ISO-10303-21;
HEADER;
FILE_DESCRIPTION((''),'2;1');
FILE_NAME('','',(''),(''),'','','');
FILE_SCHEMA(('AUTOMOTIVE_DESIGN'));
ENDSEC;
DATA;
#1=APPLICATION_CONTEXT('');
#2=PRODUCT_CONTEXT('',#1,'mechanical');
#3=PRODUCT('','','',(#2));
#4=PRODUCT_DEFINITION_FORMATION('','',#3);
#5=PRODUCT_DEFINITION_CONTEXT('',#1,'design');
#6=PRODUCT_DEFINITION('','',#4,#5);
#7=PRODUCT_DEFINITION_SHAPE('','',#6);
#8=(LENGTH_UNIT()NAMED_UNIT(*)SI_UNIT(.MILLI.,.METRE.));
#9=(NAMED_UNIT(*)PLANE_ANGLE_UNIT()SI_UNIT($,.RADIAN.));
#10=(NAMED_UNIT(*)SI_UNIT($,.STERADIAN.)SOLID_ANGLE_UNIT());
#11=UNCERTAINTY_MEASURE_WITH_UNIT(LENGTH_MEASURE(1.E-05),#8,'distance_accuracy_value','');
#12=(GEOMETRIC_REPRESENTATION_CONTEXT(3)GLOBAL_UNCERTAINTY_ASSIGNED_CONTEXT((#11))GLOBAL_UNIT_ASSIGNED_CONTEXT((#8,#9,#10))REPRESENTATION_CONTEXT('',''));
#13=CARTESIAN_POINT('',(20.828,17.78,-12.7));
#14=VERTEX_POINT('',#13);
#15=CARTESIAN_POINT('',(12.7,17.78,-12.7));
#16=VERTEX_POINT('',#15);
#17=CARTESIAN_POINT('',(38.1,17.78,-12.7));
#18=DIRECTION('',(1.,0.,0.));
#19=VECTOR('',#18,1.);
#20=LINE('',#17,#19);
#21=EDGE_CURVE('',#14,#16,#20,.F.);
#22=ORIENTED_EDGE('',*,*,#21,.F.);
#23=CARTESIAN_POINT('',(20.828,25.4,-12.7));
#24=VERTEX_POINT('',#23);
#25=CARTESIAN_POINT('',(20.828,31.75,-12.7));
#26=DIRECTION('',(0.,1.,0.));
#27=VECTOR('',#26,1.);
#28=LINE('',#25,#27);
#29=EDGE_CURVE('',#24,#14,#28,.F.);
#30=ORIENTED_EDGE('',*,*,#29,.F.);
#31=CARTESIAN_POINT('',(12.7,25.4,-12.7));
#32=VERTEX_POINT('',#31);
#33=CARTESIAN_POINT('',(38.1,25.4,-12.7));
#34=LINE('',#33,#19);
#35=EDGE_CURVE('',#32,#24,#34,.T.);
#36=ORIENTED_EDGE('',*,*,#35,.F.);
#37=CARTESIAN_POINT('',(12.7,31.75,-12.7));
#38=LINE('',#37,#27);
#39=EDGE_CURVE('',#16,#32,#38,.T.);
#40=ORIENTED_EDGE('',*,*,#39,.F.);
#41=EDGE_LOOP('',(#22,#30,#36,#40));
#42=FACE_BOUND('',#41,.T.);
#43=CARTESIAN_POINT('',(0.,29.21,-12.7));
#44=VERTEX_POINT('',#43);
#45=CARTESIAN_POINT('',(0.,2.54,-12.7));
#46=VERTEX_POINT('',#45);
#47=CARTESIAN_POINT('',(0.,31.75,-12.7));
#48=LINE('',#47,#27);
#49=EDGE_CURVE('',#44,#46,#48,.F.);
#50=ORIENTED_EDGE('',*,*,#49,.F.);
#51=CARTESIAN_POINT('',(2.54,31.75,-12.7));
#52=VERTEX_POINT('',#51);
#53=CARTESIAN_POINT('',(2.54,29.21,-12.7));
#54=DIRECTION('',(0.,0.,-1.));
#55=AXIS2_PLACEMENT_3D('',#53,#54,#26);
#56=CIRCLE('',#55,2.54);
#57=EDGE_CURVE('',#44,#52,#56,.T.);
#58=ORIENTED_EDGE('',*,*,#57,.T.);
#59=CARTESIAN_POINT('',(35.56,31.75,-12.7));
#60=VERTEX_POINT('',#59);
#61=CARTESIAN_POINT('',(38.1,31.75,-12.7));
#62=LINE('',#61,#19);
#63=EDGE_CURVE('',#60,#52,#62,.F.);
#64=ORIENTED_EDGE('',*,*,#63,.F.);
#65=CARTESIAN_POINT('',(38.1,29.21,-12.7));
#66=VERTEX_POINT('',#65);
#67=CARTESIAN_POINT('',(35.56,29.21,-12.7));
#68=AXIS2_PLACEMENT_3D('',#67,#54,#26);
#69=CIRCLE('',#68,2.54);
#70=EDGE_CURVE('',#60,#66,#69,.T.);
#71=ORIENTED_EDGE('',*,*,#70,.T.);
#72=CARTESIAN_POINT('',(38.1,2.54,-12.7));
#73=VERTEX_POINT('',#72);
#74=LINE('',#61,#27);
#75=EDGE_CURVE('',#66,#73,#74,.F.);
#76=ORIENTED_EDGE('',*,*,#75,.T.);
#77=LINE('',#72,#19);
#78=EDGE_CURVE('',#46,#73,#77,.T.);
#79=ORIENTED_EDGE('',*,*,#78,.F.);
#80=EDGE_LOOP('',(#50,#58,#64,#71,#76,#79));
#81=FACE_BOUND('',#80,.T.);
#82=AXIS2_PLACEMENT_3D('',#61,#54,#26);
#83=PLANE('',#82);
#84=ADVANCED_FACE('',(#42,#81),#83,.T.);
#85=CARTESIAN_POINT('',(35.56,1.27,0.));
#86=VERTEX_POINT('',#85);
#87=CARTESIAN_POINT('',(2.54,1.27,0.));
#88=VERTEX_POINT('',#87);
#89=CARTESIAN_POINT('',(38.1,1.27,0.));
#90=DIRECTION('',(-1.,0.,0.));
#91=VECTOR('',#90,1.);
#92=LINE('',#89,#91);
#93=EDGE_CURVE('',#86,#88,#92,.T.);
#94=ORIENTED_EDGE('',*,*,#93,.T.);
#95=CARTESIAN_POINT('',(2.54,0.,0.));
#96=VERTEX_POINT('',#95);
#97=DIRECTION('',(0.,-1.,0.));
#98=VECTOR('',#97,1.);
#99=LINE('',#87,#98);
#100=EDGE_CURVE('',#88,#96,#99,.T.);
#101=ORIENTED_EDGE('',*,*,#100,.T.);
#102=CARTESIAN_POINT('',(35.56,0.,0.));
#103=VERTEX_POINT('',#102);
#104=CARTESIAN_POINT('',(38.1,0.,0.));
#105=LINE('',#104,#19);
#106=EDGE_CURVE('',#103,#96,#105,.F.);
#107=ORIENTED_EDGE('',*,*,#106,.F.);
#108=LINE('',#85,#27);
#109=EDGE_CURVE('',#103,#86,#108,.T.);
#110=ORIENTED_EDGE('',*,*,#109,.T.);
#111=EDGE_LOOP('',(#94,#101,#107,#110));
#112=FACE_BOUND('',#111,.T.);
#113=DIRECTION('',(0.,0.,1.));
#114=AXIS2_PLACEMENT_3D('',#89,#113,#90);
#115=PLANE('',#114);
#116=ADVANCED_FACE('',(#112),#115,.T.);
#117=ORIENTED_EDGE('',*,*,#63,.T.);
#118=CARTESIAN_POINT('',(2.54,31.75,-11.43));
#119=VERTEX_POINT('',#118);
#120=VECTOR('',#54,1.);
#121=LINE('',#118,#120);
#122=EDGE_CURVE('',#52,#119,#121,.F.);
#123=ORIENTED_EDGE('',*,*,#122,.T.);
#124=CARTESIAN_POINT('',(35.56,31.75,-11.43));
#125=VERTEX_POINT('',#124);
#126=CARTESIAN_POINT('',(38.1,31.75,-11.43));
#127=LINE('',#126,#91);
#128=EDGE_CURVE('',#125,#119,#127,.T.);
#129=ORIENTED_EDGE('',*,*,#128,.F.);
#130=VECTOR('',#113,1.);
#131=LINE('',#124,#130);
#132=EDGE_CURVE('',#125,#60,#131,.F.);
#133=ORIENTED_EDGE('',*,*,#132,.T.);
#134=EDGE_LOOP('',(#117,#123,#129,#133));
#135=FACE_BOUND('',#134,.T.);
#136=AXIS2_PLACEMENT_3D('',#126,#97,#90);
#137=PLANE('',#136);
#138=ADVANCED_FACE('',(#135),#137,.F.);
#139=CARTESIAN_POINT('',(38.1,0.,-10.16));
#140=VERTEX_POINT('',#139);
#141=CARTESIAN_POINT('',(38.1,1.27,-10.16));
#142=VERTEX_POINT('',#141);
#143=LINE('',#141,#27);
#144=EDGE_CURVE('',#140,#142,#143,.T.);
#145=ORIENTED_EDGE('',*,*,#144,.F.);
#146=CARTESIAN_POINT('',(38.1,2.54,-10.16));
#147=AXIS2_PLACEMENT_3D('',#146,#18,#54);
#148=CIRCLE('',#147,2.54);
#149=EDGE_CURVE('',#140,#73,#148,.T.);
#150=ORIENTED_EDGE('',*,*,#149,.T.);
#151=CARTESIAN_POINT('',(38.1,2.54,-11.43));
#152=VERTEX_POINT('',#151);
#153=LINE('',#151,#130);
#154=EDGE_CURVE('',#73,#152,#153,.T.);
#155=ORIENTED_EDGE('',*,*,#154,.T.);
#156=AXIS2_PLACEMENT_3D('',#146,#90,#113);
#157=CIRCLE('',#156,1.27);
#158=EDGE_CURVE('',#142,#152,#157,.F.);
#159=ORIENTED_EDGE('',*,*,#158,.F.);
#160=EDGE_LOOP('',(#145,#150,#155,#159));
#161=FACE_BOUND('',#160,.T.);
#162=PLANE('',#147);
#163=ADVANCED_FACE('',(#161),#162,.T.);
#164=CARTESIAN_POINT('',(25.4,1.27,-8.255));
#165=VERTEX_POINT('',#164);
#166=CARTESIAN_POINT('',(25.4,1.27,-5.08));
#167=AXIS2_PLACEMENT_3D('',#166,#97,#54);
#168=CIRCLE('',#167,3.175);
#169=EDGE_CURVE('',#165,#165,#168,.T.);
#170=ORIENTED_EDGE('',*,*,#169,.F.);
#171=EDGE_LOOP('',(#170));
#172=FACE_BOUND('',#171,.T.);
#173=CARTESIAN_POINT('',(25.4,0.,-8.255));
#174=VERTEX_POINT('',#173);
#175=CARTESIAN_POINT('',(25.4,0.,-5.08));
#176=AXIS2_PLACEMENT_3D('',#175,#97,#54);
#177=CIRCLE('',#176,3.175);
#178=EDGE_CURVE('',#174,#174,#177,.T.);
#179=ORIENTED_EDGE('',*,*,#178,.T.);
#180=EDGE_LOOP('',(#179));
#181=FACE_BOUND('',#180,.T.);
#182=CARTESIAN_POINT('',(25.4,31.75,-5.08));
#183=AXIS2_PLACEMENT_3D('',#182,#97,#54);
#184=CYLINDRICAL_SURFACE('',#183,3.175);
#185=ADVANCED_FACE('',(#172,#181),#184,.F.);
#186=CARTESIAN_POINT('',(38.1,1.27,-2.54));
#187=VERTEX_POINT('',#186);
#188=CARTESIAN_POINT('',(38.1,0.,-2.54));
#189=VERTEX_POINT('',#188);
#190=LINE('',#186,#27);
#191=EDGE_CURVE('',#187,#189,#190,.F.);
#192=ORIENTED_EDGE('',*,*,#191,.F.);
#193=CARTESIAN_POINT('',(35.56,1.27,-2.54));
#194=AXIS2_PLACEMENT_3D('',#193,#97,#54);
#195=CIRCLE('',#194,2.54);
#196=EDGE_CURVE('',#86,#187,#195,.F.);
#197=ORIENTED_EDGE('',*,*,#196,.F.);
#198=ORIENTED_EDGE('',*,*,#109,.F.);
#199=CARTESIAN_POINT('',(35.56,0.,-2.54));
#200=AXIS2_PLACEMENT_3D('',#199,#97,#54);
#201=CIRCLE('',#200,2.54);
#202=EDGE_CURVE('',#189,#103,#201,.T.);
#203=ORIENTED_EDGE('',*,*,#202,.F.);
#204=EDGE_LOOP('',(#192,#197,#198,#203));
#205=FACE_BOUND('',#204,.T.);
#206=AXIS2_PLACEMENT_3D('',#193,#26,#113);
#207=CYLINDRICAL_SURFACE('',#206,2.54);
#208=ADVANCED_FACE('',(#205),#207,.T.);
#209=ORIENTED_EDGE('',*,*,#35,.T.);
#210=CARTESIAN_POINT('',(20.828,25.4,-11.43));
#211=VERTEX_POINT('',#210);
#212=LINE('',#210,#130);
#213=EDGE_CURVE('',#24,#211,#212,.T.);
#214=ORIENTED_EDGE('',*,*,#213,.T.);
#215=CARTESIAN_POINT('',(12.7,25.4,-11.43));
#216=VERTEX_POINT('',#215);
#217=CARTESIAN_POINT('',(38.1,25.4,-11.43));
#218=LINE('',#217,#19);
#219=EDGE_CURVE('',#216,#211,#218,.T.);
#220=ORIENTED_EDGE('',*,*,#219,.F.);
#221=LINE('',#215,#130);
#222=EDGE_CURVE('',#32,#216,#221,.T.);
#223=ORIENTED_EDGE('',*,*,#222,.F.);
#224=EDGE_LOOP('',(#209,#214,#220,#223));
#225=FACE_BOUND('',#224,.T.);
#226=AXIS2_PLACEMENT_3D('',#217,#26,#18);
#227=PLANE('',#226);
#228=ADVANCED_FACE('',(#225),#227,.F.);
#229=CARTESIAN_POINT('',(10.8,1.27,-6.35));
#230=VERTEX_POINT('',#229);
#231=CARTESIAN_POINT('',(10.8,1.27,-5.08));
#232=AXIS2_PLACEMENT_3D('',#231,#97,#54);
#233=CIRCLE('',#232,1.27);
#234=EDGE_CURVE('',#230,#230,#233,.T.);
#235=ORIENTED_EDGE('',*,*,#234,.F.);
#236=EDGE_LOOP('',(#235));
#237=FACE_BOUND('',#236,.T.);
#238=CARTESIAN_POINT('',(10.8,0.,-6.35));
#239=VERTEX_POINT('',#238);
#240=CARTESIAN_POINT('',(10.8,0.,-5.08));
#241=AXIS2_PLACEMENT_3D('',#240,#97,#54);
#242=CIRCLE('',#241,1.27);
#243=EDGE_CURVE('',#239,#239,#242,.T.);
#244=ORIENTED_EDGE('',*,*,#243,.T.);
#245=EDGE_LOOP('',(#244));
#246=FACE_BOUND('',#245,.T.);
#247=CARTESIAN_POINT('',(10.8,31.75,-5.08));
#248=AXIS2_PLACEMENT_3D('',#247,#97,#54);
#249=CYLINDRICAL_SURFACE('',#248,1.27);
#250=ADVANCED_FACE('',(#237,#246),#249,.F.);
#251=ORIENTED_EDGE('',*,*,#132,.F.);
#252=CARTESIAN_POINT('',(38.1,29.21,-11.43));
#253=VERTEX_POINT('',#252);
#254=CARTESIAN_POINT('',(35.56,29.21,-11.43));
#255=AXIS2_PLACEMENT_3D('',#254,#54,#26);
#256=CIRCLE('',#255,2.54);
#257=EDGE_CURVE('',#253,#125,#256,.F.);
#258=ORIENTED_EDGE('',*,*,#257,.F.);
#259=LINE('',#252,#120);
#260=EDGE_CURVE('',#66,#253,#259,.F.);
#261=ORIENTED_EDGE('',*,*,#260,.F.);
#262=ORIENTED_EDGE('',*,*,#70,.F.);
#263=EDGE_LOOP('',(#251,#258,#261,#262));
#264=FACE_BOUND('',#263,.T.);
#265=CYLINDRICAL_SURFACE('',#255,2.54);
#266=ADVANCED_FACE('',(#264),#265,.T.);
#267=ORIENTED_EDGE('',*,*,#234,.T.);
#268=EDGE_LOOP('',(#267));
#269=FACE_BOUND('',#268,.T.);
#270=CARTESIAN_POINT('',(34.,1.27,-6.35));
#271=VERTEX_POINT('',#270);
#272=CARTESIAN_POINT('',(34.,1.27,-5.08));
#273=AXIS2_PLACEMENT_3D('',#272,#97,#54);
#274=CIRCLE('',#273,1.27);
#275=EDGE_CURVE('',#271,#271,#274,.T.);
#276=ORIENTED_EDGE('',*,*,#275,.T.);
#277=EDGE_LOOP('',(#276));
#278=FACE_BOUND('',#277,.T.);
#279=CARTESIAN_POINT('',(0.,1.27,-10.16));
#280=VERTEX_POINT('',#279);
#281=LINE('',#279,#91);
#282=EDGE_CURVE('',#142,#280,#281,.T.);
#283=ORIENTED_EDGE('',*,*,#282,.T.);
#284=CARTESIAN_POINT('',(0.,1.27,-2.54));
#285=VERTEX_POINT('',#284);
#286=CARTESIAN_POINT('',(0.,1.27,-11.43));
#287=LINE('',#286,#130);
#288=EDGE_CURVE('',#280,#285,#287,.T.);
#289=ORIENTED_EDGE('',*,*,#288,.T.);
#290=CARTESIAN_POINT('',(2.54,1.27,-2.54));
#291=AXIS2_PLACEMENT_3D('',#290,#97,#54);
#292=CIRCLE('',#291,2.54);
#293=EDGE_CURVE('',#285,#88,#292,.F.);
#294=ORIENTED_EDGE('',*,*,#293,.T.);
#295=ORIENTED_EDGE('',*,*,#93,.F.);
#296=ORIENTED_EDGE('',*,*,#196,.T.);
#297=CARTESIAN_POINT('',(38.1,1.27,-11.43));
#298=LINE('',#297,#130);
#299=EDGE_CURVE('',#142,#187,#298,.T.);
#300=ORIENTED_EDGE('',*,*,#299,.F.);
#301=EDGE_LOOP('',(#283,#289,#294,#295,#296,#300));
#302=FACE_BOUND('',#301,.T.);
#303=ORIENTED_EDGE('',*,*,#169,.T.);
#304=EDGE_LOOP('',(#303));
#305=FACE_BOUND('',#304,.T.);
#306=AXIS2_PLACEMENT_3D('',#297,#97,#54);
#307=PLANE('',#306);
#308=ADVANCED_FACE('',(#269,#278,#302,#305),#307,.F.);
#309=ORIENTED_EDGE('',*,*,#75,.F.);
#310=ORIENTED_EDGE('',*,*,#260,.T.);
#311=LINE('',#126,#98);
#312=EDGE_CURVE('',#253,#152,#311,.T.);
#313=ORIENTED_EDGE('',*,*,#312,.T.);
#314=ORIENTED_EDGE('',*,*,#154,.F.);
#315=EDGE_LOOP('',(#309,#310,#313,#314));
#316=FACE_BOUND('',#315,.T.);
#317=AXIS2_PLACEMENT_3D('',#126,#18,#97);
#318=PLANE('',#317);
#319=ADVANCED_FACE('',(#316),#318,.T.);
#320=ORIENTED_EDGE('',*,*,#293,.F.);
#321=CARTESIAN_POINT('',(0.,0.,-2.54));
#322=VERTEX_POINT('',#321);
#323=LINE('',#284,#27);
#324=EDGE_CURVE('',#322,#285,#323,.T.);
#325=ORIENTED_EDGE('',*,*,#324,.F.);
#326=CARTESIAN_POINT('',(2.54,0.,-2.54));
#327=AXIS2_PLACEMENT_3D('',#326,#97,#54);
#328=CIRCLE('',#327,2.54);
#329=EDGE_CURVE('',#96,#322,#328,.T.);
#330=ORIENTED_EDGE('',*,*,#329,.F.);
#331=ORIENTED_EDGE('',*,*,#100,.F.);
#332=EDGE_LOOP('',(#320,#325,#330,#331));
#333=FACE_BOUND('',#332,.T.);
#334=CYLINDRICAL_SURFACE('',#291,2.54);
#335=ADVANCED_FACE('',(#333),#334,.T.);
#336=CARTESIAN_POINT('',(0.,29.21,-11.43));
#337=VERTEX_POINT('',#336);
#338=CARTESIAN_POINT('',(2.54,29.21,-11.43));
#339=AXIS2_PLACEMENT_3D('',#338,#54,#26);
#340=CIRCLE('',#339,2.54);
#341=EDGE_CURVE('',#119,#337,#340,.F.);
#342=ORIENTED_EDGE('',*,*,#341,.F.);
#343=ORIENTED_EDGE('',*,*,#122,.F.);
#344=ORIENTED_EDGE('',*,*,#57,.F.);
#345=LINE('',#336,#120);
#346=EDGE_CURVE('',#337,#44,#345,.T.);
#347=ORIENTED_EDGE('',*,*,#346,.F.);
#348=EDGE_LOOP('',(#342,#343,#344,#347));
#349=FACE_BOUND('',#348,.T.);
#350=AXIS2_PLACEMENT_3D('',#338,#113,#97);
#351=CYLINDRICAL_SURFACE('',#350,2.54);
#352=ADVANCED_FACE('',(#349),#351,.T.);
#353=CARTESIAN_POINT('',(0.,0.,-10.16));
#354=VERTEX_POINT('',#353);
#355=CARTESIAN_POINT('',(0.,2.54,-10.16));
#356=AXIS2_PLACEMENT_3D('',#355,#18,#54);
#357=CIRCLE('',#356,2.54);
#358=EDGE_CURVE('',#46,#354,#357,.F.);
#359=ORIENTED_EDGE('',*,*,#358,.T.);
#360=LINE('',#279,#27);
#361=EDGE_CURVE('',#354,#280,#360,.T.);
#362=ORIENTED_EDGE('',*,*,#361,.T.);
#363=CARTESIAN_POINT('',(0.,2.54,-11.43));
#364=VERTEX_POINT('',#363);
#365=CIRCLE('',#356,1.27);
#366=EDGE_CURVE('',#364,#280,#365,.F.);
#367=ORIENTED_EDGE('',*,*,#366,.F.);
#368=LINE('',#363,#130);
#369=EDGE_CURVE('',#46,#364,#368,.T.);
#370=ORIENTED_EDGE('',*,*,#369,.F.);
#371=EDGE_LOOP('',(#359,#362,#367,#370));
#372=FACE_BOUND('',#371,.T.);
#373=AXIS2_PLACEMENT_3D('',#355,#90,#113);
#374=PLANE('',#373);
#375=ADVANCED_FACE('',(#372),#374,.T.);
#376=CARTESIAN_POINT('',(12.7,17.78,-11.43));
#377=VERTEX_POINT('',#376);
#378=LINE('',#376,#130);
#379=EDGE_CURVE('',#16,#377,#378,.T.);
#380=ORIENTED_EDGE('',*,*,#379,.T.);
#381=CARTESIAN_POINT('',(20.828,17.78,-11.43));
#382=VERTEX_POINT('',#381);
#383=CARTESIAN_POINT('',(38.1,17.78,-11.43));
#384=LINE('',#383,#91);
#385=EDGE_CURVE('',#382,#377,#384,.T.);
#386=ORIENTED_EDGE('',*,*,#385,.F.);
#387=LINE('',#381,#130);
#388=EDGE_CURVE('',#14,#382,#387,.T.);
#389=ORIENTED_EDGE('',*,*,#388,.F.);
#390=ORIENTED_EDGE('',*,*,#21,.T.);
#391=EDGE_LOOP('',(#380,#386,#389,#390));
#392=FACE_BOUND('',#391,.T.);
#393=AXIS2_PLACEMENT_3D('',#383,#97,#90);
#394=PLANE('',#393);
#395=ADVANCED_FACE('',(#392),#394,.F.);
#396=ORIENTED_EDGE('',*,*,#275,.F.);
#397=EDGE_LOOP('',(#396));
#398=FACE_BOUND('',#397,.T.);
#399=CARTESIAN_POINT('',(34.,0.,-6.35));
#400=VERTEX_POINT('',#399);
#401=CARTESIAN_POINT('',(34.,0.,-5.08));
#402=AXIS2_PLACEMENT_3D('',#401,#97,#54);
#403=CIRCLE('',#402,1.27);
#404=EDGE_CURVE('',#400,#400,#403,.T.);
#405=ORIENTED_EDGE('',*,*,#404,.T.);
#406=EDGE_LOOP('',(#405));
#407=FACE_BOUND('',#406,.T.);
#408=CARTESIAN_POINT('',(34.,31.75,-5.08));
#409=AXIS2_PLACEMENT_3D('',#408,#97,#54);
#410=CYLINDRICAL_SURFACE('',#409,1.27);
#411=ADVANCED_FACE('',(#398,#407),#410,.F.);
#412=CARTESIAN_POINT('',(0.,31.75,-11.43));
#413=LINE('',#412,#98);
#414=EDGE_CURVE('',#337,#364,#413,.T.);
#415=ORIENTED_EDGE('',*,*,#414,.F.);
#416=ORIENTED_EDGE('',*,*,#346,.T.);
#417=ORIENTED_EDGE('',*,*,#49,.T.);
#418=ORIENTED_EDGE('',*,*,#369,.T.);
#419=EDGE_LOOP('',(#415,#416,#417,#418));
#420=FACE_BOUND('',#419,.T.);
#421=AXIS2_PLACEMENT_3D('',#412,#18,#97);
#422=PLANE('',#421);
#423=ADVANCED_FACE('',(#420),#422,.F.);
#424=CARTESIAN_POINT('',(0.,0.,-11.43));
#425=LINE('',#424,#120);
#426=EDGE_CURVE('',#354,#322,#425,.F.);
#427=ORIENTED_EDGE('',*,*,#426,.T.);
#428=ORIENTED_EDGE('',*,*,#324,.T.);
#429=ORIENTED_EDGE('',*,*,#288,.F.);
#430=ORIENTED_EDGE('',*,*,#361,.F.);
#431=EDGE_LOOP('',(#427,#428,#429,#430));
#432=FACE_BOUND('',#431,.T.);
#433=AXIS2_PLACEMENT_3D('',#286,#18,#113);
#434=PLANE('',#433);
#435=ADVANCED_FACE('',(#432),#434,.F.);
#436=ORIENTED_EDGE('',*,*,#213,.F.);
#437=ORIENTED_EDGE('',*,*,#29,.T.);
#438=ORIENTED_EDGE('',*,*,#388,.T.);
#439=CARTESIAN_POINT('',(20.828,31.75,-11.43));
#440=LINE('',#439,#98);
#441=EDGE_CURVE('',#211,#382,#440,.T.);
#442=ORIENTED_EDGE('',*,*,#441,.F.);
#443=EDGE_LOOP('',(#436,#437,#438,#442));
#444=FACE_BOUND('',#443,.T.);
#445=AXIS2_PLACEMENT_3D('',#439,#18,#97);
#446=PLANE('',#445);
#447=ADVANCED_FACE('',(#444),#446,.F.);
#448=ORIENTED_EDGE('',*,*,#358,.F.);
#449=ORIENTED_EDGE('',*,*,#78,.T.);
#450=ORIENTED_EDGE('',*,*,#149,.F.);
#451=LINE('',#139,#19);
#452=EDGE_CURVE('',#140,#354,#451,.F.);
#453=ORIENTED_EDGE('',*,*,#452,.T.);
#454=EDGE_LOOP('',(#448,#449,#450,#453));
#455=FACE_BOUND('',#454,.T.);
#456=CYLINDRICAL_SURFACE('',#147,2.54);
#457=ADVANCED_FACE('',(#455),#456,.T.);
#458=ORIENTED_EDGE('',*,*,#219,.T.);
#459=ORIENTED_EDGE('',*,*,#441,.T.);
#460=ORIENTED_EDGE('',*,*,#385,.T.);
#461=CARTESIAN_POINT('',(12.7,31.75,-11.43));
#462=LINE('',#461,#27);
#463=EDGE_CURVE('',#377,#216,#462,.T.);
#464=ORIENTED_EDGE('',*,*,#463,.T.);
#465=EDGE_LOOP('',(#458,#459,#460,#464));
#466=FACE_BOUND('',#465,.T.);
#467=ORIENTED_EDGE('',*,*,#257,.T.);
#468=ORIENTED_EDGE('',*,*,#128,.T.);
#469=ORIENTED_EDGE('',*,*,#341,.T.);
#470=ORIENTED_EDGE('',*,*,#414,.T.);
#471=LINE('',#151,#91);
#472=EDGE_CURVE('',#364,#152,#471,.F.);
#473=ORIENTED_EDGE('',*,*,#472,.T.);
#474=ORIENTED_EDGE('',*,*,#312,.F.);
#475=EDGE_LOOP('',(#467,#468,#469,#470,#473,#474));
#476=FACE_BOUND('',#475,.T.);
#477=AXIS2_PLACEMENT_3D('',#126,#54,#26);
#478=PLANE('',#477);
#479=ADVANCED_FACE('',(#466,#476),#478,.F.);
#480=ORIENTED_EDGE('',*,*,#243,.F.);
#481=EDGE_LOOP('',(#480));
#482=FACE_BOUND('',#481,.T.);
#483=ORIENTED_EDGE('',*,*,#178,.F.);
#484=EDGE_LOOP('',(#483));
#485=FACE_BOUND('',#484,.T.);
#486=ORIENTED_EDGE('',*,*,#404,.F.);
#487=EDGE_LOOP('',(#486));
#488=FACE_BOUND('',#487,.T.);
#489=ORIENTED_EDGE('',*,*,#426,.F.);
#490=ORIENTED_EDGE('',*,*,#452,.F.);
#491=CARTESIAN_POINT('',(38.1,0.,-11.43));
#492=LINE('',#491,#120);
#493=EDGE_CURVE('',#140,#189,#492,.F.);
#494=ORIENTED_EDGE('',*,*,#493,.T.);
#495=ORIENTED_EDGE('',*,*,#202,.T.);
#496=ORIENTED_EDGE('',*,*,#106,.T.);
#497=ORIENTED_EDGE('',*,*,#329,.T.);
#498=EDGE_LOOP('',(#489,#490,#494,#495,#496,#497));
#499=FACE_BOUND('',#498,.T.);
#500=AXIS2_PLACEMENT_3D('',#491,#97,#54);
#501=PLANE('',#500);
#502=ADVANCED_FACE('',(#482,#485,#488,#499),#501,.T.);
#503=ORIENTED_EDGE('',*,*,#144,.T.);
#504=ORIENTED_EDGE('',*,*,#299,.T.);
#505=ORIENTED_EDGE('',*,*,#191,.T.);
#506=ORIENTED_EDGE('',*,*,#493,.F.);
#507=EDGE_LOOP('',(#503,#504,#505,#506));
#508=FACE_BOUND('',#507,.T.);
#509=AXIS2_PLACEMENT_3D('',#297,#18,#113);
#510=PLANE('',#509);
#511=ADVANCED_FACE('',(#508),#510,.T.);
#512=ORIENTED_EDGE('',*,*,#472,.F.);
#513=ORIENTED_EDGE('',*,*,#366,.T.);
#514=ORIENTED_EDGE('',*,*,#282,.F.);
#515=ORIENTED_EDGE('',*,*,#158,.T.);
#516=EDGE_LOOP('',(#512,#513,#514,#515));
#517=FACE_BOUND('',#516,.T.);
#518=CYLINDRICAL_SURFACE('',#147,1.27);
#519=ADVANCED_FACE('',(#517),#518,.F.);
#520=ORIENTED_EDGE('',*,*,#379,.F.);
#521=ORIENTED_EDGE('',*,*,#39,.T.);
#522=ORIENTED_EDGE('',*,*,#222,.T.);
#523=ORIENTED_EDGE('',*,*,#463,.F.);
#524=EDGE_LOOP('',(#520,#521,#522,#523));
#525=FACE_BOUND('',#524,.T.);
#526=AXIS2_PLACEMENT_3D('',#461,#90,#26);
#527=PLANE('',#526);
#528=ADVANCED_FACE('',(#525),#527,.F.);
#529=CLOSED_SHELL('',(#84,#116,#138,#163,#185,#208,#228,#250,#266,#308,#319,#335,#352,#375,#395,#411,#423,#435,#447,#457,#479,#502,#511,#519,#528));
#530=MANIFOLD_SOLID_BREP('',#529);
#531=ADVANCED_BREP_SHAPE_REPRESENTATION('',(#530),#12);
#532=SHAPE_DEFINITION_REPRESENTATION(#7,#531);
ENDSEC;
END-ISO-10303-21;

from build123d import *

# Parameters (mm, degrees)
BOSS_EXTRUDE1_DEPTH    = 38.1
SKETCH2_W              = 8.128
SKETCH2_H              = 7.62
CUT_EXTRUDE1_DEPTH     = 52.195336702
CONVERT_SOLID1_DEPTH   = 38.1
CONVERT_SOLID1_2_DEPTH = 38.1
FILLET1_R              = 2.54
SKETCH7_R              = 3.175
CUT_EXTRUDE2_DEPTH     = 52.195336702
SKETCH8_R              = 1.27
CUT_EXTRUDE3_DEPTH     = 52.195336702


# Read off the part's stored shape, not the designer's step: Convert-Solid1
with BuildPart() as part:
    # Sketch1 → Boss-Extrude1 (new body)
    with BuildSketch(Plane(origin=(0, 0, 0), x_dir=(0, 0, -1), z_dir=(1, 0, 0))):
        Polygon((0, 0), (12.7, 0), (12.7, 31.75), (11.43, 31.75), (11.43, 1.27), (0, 1.27), align=None)
    extrude(amount=BOSS_EXTRUDE1_DEPTH)

    # Sketch2 → Cut-Extrude1 (cut, through all)
    with BuildSketch(Plane(origin=(0, 0, -12.7), x_dir=(-1, 0, 0), z_dir=(0, 0, -1))):
        with Locations((-16.764, 21.59)):
            Rectangle(SKETCH2_W, SKETCH2_H)
    extrude(amount=-CUT_EXTRUDE1_DEPTH, mode=Mode.SUBTRACT)

    # Convert-Solid1 outline → Convert-Solid1 (cut)
    with BuildSketch(Plane.YZ):
        with BuildLine():
            ThreePointArc((2.54, -12.7), (0.743948776, -11.956051224), (0, -10.16))
            Line((0, -10.16), (0, -12.7))
            Line((0, -12.7), (2.54, -12.7))
        make_face()
    extrude(amount=CONVERT_SOLID1_DEPTH, mode=Mode.SUBTRACT)

    # Convert-Solid1 2 outline → Convert-Solid1 2 (add)
    with BuildSketch(Plane.YZ):
        with BuildLine():
            ThreePointArc((2.54, -11.43), (1.641974388, -11.058025612), (1.27, -10.16))
            Line((1.27, -10.16), (1.27, -11.43))
            Line((1.27, -11.43), (2.54, -11.43))
        make_face()
    extrude(amount=CONVERT_SOLID1_2_DEPTH)

    # Fillet1
    fillet1_edges = [part.edges().sort_by_distance(p)[0] for p in [
        (0, 31.75, -12.065),
        (38.1, 31.75, -12.065),
        (38.1, 0.635, 0),
        (0, 0.635, 0),
    ]]
    fillet(fillet1_edges, radius=FILLET1_R)

    # Sketch7 → Cut-Extrude2 (cut, through all)
    with BuildSketch(Plane.XZ):
        with Locations(Location((25.4, -5.08, 0), (0, 0, 270))):
            Circle(SKETCH7_R)
    extrude(amount=-CUT_EXTRUDE2_DEPTH, mode=Mode.SUBTRACT)

    # Sketch8 → Cut-Extrude3 (cut, through all)
    with BuildSketch(Plane.XZ):
        with Locations(Location((10.8, -5.08, 0), (0, 0, 270))):
            Circle(SKETCH8_R)
        with Locations(Location((34, -5.08, 0), (0, 0, 270))):
            Circle(SKETCH8_R)
    extrude(amount=-CUT_EXTRUDE3_DEPTH, mode=Mode.SUBTRACT)


solid = part.part
